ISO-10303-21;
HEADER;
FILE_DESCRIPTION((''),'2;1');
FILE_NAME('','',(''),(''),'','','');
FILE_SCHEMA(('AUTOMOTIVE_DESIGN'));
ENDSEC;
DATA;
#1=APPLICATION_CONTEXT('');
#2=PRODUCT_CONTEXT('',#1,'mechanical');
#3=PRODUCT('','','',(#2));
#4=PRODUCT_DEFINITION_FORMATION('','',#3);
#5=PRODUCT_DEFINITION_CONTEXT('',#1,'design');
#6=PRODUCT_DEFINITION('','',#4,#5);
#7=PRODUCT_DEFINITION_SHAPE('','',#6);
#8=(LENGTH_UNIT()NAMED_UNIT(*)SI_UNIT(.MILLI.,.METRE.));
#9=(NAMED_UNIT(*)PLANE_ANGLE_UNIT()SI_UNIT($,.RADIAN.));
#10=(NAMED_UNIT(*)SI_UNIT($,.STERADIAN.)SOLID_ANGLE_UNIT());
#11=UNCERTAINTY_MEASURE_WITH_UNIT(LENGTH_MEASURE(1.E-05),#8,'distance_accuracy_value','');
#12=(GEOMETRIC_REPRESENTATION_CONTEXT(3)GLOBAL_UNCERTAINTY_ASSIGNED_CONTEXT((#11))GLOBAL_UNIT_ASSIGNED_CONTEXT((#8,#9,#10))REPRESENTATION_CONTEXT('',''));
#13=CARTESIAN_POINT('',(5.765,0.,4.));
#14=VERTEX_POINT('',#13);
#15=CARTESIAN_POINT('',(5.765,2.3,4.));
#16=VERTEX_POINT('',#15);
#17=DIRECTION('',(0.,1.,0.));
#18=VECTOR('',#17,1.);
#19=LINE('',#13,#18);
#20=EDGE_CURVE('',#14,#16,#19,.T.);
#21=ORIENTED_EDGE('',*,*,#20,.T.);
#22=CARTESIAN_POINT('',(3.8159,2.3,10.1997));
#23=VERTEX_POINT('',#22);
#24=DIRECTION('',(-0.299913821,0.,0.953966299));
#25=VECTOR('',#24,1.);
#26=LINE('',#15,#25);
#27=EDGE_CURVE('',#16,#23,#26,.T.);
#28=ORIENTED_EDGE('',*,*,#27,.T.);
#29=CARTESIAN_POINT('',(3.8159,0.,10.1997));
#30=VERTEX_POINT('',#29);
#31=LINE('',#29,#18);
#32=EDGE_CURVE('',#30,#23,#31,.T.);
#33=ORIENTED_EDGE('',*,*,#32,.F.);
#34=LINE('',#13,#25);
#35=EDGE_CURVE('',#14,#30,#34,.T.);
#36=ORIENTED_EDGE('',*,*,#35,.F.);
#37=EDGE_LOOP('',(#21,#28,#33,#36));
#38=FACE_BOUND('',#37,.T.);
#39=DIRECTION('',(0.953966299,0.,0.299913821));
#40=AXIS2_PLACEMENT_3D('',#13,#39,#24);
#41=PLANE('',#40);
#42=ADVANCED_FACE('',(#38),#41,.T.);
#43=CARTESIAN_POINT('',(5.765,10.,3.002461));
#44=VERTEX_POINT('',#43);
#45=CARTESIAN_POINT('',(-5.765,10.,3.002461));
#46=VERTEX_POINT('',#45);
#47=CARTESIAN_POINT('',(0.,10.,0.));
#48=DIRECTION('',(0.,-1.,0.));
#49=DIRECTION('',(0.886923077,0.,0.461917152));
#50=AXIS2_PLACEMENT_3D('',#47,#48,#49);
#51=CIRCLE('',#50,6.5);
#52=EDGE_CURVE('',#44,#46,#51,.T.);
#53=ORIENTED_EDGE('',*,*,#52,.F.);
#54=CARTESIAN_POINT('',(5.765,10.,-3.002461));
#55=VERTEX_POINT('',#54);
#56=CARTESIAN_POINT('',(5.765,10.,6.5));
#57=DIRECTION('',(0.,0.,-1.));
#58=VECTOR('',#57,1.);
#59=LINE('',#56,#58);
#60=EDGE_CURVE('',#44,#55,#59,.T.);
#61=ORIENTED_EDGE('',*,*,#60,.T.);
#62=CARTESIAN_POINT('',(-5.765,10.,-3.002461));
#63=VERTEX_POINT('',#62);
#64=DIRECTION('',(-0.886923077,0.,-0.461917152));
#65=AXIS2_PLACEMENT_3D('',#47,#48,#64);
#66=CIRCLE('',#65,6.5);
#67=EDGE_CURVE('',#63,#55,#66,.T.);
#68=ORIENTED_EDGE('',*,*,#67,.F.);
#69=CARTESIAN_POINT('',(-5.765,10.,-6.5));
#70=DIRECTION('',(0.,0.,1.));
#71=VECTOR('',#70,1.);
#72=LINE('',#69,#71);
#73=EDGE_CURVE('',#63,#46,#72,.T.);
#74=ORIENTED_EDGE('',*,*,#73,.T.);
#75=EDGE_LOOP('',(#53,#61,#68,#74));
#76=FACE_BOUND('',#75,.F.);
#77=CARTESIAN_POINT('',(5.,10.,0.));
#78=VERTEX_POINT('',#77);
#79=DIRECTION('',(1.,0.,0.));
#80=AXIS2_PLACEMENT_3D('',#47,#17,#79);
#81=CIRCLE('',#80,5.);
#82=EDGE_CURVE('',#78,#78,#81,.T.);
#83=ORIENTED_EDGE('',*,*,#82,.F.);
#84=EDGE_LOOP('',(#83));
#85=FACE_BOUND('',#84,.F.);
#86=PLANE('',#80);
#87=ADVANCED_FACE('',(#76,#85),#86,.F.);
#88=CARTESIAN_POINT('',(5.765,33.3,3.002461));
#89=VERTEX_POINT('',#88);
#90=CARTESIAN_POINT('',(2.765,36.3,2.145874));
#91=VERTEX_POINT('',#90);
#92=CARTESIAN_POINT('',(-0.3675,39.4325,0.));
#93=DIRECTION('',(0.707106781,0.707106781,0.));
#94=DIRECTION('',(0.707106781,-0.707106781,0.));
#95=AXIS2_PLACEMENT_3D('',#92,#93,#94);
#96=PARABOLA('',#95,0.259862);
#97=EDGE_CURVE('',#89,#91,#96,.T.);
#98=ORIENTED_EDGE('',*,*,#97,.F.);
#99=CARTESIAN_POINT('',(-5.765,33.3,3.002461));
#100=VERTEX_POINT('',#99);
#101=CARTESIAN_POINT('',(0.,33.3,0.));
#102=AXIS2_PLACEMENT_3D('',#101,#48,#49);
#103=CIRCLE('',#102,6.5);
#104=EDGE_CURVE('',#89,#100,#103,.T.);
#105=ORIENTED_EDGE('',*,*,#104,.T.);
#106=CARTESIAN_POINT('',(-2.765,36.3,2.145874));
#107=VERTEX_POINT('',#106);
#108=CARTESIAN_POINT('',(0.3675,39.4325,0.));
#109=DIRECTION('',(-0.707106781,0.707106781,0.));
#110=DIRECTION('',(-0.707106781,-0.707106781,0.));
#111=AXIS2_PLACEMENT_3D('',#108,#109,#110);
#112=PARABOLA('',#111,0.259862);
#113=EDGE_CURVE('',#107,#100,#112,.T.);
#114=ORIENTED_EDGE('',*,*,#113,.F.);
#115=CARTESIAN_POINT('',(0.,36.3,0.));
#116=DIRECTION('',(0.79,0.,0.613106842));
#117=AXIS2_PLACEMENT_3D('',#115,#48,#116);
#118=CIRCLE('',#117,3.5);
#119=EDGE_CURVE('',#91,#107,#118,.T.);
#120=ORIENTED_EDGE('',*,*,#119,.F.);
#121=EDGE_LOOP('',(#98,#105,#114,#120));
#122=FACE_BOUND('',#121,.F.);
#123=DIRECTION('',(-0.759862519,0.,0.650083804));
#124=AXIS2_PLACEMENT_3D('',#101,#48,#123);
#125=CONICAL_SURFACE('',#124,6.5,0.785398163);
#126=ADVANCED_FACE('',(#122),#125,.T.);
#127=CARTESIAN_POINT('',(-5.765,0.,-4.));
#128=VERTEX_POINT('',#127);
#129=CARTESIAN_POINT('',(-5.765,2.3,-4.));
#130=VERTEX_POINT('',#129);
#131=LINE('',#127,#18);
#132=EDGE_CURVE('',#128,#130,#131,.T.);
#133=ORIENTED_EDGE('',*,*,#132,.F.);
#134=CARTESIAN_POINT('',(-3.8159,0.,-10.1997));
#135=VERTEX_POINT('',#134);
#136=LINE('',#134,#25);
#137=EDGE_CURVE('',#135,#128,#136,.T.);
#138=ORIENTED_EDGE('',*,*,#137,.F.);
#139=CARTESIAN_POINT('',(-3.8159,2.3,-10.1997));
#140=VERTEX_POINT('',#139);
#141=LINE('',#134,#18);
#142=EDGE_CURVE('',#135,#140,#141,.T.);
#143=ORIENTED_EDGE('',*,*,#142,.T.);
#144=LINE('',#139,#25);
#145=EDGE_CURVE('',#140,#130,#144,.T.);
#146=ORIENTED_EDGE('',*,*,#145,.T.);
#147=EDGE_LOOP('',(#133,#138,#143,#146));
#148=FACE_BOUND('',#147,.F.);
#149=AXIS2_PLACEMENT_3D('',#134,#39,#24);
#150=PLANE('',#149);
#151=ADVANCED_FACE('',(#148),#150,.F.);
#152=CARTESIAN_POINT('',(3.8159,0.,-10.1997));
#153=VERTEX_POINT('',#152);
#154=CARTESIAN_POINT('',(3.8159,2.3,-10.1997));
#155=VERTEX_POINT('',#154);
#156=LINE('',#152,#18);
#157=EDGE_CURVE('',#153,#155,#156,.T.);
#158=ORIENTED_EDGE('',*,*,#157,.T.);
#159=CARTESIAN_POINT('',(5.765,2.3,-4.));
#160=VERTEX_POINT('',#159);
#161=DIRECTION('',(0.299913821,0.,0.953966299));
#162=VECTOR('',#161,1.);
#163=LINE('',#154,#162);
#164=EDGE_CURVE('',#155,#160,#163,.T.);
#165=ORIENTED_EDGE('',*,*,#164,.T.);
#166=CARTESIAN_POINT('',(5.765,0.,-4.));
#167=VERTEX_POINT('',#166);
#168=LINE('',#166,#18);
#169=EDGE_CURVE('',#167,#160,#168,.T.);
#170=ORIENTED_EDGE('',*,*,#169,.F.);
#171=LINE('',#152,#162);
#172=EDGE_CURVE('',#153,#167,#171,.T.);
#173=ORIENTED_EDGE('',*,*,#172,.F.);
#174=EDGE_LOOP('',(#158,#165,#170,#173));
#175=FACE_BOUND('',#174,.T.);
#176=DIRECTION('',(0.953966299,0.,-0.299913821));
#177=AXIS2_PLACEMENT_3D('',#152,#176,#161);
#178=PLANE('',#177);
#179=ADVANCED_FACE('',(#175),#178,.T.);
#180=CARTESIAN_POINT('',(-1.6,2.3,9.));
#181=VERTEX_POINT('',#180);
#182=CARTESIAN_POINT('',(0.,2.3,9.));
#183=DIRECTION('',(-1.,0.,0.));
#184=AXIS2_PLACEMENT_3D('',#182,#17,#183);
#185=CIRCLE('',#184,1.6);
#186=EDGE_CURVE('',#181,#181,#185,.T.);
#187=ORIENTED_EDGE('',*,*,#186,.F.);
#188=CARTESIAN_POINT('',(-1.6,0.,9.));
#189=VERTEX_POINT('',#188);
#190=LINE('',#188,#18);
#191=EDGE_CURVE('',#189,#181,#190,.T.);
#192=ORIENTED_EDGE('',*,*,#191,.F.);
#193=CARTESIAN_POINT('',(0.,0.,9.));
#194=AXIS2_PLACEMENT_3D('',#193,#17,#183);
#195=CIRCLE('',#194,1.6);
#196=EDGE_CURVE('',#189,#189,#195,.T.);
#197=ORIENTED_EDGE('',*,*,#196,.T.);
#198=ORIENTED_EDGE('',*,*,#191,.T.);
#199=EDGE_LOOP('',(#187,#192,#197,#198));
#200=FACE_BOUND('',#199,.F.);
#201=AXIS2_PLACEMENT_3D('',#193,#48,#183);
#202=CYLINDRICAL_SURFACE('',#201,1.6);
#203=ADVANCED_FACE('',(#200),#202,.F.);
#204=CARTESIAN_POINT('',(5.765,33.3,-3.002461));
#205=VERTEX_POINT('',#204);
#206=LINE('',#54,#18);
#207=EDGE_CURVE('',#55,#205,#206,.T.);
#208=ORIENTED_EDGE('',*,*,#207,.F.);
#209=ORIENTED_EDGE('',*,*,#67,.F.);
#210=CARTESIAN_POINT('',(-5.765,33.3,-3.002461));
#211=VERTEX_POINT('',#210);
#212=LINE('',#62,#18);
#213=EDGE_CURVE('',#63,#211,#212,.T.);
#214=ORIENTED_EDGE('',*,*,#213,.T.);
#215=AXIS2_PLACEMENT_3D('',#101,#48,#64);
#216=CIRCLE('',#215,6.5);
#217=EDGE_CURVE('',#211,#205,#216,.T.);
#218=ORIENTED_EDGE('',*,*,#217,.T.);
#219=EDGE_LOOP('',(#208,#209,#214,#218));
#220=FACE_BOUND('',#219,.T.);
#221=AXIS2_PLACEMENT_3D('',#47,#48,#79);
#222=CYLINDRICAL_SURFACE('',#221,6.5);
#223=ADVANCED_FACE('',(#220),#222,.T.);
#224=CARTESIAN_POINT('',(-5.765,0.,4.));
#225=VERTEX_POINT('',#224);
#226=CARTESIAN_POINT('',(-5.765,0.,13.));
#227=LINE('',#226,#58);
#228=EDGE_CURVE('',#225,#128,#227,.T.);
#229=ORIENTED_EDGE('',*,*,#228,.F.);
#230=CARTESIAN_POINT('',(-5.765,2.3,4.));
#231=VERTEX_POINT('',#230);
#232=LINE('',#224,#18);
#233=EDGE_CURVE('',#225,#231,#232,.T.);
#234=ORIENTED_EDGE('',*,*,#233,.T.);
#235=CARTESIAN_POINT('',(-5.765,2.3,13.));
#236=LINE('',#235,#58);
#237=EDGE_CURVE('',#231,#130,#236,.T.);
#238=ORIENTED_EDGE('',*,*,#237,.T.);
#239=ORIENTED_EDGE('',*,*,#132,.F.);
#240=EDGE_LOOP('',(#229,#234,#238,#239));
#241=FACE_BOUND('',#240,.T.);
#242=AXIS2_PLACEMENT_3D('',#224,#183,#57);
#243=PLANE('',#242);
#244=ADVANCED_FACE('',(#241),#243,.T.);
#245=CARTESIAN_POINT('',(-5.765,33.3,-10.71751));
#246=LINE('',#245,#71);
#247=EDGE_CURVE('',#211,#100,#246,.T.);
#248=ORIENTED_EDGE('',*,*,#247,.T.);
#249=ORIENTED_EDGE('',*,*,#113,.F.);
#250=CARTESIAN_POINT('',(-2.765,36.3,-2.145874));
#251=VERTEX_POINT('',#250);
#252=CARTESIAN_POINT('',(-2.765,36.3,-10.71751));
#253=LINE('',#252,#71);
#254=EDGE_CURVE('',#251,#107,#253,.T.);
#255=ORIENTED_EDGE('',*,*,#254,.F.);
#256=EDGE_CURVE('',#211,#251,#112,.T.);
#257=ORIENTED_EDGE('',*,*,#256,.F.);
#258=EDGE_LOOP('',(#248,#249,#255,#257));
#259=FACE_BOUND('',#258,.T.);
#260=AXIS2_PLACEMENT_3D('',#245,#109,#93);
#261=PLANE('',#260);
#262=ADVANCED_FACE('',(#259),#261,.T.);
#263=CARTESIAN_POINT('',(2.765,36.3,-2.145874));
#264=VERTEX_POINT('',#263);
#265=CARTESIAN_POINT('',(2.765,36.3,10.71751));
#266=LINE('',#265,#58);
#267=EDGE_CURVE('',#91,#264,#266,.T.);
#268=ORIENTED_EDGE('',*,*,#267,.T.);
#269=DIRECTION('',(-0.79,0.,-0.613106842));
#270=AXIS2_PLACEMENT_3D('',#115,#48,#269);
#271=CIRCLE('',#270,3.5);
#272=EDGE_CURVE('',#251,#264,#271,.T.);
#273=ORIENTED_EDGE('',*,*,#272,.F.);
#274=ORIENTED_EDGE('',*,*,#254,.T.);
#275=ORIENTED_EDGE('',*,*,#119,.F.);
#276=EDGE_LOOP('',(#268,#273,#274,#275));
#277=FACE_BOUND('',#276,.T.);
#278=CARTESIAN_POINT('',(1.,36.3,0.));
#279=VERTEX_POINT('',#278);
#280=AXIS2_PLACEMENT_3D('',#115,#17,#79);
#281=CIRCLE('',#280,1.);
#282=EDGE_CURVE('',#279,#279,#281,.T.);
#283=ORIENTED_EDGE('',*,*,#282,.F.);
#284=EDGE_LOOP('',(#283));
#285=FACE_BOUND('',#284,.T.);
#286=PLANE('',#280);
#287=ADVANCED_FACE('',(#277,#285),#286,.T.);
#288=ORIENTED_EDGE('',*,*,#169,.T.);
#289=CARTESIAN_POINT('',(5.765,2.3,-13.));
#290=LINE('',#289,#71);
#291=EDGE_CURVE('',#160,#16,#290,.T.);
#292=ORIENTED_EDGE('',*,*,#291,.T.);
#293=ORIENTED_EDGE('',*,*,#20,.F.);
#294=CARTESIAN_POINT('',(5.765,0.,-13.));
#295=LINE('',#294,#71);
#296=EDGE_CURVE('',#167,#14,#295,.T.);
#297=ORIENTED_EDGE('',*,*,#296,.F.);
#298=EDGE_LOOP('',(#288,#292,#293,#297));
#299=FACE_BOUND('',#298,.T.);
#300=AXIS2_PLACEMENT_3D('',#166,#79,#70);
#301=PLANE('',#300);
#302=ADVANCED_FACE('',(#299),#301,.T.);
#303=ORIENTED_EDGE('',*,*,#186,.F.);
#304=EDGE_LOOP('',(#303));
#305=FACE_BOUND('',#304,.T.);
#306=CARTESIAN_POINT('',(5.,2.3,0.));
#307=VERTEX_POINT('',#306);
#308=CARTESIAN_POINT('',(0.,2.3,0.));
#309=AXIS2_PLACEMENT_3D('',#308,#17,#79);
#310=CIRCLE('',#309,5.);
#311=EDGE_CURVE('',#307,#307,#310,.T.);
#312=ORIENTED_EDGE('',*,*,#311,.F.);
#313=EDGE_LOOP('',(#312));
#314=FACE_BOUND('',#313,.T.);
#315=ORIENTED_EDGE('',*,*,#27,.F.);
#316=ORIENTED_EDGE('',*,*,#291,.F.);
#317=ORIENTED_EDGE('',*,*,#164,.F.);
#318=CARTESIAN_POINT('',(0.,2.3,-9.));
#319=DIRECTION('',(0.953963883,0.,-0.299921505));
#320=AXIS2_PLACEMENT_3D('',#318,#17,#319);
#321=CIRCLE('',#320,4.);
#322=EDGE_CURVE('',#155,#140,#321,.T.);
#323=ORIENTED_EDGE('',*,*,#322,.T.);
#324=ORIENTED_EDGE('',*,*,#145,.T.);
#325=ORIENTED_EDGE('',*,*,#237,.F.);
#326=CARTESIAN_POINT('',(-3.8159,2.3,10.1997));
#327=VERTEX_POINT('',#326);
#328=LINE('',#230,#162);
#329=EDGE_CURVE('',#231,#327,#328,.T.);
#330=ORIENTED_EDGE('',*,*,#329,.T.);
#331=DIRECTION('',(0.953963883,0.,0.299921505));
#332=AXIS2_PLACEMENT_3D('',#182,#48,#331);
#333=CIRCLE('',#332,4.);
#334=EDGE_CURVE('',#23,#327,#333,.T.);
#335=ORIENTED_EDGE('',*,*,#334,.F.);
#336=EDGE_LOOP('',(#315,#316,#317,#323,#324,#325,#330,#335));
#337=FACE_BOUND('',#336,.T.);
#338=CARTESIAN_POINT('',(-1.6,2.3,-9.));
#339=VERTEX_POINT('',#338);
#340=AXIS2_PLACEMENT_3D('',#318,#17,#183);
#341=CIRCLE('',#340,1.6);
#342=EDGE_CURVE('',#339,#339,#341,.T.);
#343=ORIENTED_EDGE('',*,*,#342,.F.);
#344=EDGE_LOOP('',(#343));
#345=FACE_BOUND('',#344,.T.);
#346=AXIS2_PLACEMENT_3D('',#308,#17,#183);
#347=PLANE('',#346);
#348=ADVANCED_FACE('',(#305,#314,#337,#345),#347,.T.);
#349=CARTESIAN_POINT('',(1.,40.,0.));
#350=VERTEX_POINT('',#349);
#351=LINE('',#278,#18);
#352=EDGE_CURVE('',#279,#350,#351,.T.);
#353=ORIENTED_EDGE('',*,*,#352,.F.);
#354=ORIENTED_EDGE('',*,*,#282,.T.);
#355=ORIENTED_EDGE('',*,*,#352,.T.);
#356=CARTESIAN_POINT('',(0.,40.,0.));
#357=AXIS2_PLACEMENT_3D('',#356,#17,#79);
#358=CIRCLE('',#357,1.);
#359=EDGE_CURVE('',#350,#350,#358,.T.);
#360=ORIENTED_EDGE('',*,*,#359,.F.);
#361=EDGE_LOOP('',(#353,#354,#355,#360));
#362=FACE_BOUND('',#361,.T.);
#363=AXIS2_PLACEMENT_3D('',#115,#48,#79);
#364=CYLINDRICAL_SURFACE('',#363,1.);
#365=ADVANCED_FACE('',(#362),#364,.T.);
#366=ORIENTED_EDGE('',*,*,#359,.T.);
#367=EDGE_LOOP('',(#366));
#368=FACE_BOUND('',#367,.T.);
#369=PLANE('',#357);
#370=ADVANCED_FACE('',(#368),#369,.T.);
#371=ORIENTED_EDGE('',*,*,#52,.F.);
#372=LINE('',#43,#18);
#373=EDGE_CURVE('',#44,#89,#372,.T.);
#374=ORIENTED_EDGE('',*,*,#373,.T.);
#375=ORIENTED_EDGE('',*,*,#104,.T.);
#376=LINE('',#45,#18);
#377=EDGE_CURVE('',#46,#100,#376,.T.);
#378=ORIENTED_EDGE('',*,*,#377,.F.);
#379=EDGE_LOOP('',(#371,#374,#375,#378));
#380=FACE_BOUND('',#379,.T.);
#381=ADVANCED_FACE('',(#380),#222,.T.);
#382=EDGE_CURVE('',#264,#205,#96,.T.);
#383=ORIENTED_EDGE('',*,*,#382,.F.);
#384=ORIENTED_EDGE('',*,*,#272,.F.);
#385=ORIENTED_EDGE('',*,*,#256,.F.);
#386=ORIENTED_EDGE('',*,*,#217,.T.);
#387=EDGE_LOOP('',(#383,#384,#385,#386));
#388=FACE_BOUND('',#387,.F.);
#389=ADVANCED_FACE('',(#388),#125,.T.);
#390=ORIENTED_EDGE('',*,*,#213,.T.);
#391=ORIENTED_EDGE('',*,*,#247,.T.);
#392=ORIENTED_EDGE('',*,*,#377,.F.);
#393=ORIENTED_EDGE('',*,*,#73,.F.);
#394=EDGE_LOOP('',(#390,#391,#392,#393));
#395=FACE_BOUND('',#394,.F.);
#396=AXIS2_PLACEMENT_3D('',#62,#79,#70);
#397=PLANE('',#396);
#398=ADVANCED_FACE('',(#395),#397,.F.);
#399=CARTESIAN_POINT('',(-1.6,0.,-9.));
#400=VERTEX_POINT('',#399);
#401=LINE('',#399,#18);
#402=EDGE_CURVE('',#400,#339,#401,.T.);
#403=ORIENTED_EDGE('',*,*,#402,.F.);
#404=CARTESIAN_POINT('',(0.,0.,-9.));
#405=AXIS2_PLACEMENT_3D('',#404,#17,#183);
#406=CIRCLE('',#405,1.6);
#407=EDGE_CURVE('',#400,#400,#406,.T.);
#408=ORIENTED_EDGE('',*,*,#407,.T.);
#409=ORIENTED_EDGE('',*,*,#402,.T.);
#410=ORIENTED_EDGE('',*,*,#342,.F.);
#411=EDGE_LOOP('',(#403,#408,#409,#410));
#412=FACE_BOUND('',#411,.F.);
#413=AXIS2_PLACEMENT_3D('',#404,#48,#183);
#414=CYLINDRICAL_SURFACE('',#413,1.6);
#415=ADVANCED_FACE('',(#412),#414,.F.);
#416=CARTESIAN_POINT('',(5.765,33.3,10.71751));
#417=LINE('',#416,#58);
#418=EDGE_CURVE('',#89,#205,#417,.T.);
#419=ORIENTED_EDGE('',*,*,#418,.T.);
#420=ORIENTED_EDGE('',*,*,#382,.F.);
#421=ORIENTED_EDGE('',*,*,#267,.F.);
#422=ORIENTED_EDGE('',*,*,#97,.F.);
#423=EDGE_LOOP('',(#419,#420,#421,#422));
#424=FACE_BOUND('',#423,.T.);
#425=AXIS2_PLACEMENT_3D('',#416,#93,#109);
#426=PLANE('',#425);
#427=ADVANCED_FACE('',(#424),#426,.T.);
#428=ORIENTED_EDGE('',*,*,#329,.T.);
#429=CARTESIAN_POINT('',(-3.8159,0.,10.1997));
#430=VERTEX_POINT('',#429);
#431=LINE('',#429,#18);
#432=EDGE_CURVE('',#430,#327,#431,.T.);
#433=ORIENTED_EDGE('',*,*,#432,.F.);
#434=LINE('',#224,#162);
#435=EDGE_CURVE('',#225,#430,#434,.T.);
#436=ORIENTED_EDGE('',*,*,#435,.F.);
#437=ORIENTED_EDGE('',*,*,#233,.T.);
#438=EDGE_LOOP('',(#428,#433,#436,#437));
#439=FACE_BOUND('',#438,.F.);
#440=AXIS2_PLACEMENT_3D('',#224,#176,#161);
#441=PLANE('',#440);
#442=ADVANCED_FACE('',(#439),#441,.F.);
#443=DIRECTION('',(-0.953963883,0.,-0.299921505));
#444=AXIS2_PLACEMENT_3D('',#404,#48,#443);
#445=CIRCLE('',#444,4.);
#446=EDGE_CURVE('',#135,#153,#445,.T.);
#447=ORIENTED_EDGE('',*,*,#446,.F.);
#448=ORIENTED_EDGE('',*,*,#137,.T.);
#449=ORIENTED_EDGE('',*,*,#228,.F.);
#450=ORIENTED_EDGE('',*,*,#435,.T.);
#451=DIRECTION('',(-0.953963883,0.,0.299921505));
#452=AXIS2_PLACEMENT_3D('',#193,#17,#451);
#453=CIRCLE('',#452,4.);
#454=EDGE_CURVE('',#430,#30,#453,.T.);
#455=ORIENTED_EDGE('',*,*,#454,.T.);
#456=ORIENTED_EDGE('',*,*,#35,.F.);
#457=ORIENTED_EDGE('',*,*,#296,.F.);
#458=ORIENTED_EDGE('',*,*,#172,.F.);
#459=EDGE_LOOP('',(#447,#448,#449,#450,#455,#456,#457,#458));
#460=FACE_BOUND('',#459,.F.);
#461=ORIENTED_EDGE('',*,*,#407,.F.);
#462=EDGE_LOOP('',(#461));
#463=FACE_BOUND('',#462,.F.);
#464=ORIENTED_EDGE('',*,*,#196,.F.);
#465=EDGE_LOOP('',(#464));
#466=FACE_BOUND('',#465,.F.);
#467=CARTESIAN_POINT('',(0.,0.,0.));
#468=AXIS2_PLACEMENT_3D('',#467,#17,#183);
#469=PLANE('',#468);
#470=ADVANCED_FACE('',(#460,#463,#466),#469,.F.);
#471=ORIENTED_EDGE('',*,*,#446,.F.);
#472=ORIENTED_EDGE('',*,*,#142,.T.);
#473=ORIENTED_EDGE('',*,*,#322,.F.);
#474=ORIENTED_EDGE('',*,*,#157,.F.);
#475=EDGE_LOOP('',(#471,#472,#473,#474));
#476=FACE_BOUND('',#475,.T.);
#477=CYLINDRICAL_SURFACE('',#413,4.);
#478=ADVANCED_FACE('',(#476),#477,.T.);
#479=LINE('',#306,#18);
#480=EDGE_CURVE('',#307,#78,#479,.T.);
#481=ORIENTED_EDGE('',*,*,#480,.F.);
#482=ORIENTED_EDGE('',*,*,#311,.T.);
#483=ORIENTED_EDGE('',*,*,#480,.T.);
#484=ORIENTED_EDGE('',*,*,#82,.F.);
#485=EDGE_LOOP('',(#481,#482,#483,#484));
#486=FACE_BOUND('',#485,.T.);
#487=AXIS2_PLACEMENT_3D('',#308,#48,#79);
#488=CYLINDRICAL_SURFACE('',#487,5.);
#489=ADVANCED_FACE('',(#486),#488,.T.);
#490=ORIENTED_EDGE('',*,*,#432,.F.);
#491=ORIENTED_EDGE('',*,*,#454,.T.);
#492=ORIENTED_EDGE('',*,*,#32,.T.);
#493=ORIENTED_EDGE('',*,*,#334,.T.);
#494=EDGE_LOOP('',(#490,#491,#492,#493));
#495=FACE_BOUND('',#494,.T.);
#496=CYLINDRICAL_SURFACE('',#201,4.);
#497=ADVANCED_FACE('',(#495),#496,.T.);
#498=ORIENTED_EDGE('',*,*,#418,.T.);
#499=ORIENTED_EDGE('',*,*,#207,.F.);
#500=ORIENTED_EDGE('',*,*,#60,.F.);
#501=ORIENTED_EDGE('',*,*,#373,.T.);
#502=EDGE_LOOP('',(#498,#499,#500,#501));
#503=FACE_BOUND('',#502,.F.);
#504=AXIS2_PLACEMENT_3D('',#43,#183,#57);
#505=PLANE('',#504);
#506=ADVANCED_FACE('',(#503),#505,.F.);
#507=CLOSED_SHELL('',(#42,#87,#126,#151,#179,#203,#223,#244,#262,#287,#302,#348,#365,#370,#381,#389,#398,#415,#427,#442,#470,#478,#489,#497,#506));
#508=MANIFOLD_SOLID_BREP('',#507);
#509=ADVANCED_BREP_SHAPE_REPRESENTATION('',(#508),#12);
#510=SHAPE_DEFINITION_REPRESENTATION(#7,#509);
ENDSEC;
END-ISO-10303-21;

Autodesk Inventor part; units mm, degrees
ref_plane "YZ Plane" through (0, 0, 0) normal (1, 0, 0) x (0, 1, 0)
ref_plane "XZ Plane" through (0, 0, 0) normal (0, 1, 0) x (-1, 0, 0)
ref_plane "XY Plane" through (0, 0, 0) normal (0, 0, 1) x (1, 0, 0)
sketch "Sketch1" plane through (0, 0, 0) normal (0, 1, 0) x (-1, 0, 0)
  line L0 (-5.765, 13) -> (5.765, 13)
  line L1 (5.765, 13) -> (5.765, -13)
  line L2 (5.765, -13) -> (-5.765, -13)
  line L3 (-5.765, -13) -> (-5.765, 13)
  line L4 (-5.765, 13) -> (5.765, -13) construction
  line L5 (5.765, 13) -> (-5.765, -13) construction
  circle A0 centre (0, 9) radius 1.6
  circle A1 centre (0, -9) radius 1.6
  circle A2 centre (0, 9) radius 4
  circle A3 centre (0, -9) radius 4
  line L6 (5.765, 4) -> (3.8159, 10.1997)
  line L7 (3.8159, -10.1997) -> (5.765, -4)
  line L8 (-3.8159, -10.1997) -> (-5.765, -4)
  line L9 (-5.765, 4) -> (-3.8159, 10.1997)
  point P0 (0, 0)
  dimension "d0" = 26
  dimension "d1" = 11.53
  dimension "d2" = 18
  dimension "d3" = 9
  dimension "d4" = 3.2
  dimension "d5" = 8
  dimension "d6" = 4
  dimension "d7" = 4
extrude "Extrusion1" add sketch "Sketch1" along normal blind 2.3 contours A2 | L9 A2 L6 L1 L7 A3 L8 L3 | A3
sketch "Sketch2" plane through (0, 2.3, 0) normal (0, 1, 0) x (1, 0, 0)
  line L0 (5.765, -4) -> (5.765, 4) projected
  line L1 (5.765, 4) -> (3.8159, 10.1997) projected
  arc A0 (3.8159, 10.1997) -> (-3.8159, 10.1997) centre (0, 9) ccw projected
  line L2 (-3.8159, 10.1997) -> (-5.765, 4) projected
  line L3 (-5.765, 4) -> (-5.765, -4) projected
  line L4 (-5.765, -4) -> (-3.8159, -10.1997) projected
  arc A1 (-3.8159, -10.1997) -> (3.8159, -10.1997) centre (0, -9) ccw projected
  line L5 (3.8159, -10.1997) -> (5.765, -4) projected
  circle A2 centre (0, -9) radius 1.6 projected
  circle A3 centre (0, 9) radius 1.6 projected
  circle A4 centre (0, 0) radius 5
  dimension "d10" = 10
extrude "Extrusion2" add sketch "Sketch2" along normal blind 7.7 contours A4
sketch "Sketch3" plane through (0, 10, 0) normal (0, 1, 0) x (1, 0, 0)
  circle A0 centre (0, 0) radius 5 projected
  line L0 (5.765, 6.5) -> (-5.765, 6.5)
  line L1 (-5.765, 6.5) -> (-5.765, -6.5)
  line L2 (-5.765, -6.5) -> (5.765, -6.5)
  line L3 (5.765, -6.5) -> (5.765, 6.5)
  line L4 (5.765, 6.5) -> (-5.765, -6.5) construction
  line L5 (-5.765, 6.5) -> (5.765, -6.5) construction
  circle A1 centre (0, 0) radius 6.5
  point P0 (-5.765, 4)
  point P1 (5.765, -3.0025)
  point P2 (5.765, 3.0025)
  point P3 (-5.765, 3.0025)
  point P4 (-5.765, -3.0025)
  dimension "d13" = 13
extrude "Extrusion3" add sketch "Sketch3" along normal blind 26.3 contours A0 | A1 L3 L1
sketch "Sketch4" plane through (0, 36.3, 0) normal (0, 1, 0) x (1, 0, 0)
  circle A0 centre (0, 0) radius 1
  dimension "d19" = 2
chamfer "Chamfer1" distance 3 angle 45 4 edges at (0, 36.3, -6.5) (0, 36.3, 6.5) (5.765, 36.3, 0) (-5.765, 36.3, 0)
extrude "Extrusion4" add sketch "Sketch4" along normal blind 3.7
equation "\"d3\" = 0.5 * d2"
equation "\"d7\" = d6"
properties part number "BLTouch" material "ABS Plastic"
